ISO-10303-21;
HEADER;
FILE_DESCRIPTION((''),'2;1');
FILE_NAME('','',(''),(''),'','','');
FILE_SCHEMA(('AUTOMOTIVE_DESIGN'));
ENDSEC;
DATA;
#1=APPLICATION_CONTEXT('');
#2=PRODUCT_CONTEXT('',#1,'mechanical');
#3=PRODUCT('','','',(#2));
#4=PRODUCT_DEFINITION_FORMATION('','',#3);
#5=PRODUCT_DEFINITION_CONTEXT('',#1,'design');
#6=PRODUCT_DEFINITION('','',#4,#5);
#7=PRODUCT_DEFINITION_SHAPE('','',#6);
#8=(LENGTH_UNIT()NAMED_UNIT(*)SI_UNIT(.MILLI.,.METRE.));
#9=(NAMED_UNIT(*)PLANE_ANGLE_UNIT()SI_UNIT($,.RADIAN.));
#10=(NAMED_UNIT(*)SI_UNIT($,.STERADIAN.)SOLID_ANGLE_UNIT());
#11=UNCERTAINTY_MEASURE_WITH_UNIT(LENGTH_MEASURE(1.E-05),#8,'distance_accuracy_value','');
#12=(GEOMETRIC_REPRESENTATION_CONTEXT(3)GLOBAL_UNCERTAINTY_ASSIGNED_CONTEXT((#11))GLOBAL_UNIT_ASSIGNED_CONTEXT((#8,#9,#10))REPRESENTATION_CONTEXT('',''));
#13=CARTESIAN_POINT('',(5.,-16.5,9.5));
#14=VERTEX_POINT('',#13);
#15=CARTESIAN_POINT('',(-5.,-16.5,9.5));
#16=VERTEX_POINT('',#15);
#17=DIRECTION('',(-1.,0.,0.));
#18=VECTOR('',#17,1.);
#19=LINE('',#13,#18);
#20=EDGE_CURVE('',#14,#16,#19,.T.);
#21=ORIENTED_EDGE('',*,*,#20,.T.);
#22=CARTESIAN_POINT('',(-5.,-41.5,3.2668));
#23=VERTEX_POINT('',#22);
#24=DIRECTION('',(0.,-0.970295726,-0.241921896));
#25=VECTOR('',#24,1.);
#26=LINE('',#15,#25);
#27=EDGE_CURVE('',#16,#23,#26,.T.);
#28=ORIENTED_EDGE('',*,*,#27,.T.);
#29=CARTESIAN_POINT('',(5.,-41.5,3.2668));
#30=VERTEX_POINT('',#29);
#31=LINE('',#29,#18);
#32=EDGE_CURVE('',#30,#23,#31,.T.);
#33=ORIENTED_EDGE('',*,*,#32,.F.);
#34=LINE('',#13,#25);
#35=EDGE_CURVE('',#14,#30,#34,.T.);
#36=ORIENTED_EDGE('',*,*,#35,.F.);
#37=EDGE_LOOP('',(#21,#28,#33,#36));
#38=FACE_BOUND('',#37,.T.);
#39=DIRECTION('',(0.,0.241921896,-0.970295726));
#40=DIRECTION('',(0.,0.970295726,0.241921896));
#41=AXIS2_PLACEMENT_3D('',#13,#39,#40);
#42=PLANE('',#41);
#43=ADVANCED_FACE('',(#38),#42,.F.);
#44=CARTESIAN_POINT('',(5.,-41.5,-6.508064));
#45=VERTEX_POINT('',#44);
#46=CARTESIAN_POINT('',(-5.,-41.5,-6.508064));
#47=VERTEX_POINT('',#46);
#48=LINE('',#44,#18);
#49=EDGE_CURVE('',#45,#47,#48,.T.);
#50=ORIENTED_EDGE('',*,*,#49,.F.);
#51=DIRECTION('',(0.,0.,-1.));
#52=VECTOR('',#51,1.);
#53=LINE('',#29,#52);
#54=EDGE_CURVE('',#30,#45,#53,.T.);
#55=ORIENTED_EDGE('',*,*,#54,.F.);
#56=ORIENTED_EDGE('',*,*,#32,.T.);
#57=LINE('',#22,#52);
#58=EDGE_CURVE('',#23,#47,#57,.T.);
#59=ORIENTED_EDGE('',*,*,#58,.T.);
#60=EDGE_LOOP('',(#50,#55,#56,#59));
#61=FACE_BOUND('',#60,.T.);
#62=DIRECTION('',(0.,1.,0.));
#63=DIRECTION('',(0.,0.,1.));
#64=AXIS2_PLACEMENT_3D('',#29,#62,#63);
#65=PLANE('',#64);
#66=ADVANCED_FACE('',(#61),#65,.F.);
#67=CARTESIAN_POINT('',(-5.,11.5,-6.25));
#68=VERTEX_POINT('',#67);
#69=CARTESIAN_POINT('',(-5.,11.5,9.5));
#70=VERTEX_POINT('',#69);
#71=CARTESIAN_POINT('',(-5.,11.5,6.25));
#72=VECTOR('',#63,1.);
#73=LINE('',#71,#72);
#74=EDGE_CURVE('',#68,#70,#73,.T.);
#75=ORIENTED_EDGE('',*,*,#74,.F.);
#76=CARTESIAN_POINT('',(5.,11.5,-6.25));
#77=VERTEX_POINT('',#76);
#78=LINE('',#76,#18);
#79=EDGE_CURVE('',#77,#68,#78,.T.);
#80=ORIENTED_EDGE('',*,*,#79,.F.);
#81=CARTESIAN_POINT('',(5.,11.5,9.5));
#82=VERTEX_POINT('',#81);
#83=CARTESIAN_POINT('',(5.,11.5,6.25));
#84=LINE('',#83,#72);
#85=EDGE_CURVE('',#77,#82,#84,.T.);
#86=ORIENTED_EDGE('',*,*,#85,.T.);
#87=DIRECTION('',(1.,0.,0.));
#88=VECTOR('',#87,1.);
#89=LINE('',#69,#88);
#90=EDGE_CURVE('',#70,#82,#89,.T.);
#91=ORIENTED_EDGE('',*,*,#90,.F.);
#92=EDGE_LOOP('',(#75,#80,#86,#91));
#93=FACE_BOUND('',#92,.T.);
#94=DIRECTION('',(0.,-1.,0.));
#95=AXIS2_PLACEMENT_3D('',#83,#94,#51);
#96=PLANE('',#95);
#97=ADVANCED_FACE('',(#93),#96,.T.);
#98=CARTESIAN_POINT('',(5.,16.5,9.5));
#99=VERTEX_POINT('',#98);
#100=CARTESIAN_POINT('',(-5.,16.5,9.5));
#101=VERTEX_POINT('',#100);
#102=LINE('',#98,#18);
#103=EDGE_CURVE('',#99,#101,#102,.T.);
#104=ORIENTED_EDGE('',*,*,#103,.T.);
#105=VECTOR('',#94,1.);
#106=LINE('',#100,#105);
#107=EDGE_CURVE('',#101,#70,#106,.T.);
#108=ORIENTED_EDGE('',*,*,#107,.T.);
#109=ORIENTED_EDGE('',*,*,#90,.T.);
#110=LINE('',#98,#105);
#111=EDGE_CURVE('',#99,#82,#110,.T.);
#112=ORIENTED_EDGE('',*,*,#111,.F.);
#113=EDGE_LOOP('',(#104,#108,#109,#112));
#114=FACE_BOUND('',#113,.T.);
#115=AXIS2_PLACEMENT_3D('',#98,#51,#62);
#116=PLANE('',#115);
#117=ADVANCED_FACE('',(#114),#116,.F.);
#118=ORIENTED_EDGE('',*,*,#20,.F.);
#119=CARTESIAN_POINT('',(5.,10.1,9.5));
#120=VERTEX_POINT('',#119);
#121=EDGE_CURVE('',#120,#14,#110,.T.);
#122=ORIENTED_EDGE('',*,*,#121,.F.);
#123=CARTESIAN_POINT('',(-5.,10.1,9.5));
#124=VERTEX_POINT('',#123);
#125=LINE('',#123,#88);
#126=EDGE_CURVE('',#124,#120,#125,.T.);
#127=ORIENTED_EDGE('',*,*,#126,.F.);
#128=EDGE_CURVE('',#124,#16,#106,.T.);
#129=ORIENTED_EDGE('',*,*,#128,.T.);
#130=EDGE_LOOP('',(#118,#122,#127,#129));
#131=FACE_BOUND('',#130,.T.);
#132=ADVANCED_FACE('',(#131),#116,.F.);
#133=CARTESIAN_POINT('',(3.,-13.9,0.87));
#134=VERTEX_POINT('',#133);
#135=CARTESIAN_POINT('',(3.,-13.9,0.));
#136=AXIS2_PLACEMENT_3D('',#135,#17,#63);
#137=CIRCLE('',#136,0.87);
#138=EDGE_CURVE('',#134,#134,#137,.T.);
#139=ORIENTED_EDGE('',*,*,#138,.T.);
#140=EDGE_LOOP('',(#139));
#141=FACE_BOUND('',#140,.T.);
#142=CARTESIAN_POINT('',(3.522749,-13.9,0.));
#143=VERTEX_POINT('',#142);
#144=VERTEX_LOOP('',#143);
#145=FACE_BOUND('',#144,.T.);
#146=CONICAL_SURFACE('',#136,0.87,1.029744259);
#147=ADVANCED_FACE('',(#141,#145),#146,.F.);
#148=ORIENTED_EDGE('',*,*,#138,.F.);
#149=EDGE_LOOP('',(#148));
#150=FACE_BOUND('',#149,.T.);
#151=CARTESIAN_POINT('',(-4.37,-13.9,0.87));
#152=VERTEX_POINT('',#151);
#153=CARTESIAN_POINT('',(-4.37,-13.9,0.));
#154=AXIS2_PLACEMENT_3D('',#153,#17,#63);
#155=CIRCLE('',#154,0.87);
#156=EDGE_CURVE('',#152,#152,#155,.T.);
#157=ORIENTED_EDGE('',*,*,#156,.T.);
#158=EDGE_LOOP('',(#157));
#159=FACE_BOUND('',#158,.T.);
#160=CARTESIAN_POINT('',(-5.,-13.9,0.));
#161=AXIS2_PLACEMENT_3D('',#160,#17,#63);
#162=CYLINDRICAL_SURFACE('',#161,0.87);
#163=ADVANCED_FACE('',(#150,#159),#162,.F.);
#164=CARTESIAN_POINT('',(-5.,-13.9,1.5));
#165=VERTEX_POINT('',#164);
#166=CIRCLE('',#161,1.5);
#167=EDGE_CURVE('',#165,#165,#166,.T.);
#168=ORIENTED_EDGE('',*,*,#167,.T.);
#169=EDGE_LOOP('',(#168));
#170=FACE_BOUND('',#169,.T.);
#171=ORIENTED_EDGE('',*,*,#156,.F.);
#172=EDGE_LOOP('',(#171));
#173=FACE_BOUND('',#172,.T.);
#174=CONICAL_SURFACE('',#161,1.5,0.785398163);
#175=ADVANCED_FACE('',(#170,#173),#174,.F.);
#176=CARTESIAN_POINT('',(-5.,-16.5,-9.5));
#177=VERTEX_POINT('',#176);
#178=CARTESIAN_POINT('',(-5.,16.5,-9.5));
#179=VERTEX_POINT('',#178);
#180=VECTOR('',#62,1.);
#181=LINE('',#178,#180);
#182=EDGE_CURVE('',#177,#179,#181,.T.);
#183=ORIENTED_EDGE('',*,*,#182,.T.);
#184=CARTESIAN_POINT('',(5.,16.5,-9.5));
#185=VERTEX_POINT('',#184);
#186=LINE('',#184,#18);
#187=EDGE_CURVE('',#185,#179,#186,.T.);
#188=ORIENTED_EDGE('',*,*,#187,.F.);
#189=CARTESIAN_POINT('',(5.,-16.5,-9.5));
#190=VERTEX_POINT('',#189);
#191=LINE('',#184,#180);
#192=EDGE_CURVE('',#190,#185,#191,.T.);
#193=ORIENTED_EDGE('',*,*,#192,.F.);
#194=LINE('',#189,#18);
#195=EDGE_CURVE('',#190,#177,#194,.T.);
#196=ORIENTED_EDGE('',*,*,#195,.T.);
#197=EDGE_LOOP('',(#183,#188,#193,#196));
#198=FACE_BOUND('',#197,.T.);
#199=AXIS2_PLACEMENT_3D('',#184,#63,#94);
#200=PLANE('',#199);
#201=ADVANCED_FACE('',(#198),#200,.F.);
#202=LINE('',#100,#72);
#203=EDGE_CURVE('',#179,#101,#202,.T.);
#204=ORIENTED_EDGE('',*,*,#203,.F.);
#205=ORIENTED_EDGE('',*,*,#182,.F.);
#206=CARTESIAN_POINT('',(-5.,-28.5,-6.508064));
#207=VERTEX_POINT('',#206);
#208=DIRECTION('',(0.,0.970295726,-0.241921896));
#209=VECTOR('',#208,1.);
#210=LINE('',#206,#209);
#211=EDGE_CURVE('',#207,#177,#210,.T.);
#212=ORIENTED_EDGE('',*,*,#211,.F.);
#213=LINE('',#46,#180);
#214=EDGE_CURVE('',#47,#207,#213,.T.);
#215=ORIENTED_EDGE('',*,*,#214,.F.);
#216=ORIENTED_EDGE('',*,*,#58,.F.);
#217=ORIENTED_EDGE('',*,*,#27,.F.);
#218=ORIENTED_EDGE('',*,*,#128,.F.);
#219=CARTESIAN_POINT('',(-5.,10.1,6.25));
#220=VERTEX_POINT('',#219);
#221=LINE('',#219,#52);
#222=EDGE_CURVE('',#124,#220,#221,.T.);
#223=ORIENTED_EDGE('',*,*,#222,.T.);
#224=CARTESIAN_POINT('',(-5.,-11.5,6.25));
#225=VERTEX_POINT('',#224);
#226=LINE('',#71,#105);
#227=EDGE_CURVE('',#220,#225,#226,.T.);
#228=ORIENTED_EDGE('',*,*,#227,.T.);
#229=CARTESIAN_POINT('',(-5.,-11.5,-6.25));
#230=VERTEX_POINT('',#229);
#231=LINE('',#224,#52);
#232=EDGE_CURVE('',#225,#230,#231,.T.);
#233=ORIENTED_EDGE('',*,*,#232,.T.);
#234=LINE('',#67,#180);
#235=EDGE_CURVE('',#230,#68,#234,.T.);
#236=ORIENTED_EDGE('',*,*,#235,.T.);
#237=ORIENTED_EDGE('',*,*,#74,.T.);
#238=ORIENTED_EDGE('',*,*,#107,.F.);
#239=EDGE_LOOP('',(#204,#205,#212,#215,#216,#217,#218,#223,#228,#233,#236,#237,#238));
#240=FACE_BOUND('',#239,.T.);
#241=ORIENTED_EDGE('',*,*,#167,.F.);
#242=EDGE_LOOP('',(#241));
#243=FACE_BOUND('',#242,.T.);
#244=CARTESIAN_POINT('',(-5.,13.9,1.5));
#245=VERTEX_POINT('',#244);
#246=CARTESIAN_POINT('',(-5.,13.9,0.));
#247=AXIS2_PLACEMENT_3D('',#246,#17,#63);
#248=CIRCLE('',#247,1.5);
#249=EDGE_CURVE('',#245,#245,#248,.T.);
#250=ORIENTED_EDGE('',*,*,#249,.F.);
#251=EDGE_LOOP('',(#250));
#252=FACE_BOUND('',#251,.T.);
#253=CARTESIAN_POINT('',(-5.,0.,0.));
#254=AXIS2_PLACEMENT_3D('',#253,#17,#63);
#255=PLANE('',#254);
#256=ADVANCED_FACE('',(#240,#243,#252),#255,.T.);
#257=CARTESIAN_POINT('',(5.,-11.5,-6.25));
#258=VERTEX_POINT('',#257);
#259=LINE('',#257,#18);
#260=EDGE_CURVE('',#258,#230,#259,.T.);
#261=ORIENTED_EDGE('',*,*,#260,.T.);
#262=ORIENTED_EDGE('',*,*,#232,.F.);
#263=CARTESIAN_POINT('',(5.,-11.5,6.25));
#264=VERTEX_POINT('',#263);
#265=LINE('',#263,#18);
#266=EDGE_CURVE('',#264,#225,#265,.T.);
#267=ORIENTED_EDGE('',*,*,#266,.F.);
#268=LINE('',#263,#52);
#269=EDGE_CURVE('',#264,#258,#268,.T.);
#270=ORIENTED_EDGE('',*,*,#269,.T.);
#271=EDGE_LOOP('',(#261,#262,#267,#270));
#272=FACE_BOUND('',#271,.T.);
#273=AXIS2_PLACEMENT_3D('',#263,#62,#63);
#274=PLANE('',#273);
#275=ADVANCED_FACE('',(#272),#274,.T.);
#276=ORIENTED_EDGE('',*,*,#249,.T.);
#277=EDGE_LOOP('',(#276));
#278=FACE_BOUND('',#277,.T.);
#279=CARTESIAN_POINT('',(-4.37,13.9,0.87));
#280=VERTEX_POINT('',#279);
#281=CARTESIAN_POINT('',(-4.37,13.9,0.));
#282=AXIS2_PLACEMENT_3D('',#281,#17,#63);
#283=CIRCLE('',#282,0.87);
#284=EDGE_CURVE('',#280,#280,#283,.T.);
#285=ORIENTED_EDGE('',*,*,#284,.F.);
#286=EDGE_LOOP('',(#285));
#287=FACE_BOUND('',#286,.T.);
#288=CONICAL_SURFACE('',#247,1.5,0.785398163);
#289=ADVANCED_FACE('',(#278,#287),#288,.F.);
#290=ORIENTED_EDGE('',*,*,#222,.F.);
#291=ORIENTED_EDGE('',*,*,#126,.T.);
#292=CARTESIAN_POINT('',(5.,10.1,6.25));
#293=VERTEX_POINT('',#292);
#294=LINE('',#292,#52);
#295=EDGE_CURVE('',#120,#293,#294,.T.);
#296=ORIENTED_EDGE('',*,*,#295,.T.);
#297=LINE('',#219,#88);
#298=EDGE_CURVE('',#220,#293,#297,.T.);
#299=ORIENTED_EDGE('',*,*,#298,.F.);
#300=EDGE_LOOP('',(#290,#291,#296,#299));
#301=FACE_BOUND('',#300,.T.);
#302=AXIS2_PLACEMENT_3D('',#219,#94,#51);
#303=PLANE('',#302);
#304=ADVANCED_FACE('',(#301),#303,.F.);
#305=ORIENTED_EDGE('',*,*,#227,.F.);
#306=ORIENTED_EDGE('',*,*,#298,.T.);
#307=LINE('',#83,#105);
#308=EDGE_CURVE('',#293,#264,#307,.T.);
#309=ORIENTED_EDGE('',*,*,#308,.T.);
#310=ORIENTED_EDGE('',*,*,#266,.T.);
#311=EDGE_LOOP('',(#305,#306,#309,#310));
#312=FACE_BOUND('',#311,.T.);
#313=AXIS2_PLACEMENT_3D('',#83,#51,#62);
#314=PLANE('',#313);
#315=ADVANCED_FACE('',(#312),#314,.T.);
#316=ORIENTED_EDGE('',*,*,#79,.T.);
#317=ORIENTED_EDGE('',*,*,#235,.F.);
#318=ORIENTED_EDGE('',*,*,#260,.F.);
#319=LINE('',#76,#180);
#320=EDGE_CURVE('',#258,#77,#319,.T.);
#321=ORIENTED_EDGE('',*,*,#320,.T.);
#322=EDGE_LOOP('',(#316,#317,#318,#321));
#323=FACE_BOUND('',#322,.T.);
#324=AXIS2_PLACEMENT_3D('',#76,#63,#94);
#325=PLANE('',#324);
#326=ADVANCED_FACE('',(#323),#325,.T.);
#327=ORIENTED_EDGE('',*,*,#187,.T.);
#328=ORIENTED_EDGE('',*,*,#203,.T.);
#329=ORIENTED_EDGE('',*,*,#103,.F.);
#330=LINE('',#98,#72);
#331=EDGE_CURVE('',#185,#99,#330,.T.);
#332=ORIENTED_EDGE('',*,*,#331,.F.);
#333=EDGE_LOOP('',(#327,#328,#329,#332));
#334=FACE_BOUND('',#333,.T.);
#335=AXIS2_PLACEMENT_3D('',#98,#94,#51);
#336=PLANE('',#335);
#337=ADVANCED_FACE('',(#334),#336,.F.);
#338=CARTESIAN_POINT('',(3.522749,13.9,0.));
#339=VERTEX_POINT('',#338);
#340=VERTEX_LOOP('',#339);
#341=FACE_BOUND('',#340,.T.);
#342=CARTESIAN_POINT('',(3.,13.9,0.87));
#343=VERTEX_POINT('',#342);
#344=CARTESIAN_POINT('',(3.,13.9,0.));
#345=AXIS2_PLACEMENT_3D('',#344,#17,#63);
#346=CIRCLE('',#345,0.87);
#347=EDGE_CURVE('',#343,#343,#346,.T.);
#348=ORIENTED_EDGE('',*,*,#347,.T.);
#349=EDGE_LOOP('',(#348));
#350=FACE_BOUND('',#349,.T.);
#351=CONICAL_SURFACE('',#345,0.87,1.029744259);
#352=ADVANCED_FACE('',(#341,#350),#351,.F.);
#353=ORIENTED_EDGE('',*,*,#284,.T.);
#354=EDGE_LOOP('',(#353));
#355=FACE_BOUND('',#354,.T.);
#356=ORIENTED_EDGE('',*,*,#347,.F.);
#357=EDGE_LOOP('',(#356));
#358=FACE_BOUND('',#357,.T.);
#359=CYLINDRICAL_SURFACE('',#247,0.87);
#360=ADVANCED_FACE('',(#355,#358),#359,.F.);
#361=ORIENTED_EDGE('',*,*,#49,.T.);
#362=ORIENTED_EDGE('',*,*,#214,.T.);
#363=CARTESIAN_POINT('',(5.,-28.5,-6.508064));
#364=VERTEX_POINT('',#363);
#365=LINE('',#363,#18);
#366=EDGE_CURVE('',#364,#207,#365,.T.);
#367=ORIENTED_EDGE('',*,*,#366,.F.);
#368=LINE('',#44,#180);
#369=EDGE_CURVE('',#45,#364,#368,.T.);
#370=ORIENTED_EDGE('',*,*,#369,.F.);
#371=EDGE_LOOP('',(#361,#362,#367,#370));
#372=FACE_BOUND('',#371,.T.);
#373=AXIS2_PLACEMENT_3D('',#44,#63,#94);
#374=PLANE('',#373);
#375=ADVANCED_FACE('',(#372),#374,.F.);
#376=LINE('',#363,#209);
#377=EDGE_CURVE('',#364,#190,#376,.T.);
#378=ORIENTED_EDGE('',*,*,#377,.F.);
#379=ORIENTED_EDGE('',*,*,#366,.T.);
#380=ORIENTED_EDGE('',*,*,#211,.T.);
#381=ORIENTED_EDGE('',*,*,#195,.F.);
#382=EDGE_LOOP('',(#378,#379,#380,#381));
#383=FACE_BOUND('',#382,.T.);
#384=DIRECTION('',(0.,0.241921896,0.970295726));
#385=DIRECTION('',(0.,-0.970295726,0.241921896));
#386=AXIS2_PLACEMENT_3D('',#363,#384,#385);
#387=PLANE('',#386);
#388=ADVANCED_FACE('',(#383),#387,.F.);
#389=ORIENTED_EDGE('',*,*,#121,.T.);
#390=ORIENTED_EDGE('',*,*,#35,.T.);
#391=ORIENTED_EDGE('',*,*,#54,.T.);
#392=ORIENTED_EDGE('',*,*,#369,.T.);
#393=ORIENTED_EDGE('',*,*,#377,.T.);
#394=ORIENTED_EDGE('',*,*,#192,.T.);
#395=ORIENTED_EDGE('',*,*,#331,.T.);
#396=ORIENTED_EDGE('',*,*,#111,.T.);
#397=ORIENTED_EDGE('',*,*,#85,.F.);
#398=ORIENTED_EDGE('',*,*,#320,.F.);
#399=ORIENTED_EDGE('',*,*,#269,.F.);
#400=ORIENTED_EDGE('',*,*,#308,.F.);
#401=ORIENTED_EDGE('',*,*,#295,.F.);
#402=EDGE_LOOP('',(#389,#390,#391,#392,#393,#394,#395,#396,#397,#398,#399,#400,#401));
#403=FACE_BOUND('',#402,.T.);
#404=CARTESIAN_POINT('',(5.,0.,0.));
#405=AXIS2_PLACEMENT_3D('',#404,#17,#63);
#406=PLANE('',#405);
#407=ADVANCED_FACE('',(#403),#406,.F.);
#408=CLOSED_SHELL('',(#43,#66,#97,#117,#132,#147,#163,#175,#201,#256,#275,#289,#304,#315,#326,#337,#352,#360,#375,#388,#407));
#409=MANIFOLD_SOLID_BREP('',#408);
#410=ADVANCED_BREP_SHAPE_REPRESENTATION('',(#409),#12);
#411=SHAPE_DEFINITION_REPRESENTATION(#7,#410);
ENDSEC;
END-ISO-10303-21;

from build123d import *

# Parameters (mm, degrees)
SKETCH1_W           = 12.5
SKETCH1_H           = 23
BOSS_EXTRUDE1_DEPTH = 5
SKETCH4_W           = 3.25
SKETCH4_H           = 1.4
CUT_EXTRUDE1_DEPTH  = 44.732139211


# Read off the part's stored shape, not the designer's step: CSK for M2 Flat Head Machine Screw1
with BuildPart() as part:
    # Sketch1 → Boss-Extrude1 (new, symmetric)
    with BuildSketch(Plane(origin=(0, 0, 0), x_dir=(0, 0, -1), z_dir=(1, 0, 0))):
        Polygon((-9.5, -16.5), (-3.266799929, -41.5), (6.508063966, -41.5), (6.508063966, -28.5), (9.5, -16.5), (9.5, 16.5), (-9.5, 16.5), align=None)
        Rectangle(SKETCH1_W, SKETCH1_H, mode=Mode.SUBTRACT)
    extrude(amount=BOSS_EXTRUDE1_DEPTH, both=True)

    # CSK for M2 Flat Head Machine Screw1 outl → CSK for M2 Flat Head Machine Screw1 (revolve, cut)
    with BuildSketch(Plane(origin=(0, 13.9, 0), x_dir=(0, 1, 0), z_dir=(0, 0, -1))):
        Polygon((0.87, 3), (0, 3.522748739), (0, -5), (1.5, -5), (0.87, -4.37), align=None)
    revolve(axis=Axis((0, 13.9, 0), (1, 0, 0)), mode=Mode.SUBTRACT)

    # CSK for M2 Flat Head Machine Screw1 2 ou → CSK for M2 Flat Head Machine Screw1 2 (revolve, cut)
    with BuildSketch(Plane(origin=(0, -13.9, 0), x_dir=(0, 1, 0), z_dir=(0, 0, -1))):
        Polygon((0.87, 3), (0, 3.522748739), (0, -5), (1.5, -5), (0.87, -4.37), align=None)
    revolve(axis=Axis((0, -13.9, 0), (1, 0, 0)), mode=Mode.SUBTRACT)

    # Sketch4 → Cut-Extrude1 (cut, through all)
    with BuildSketch(Plane(origin=(5, 0, 0), x_dir=(0, 0, -1), z_dir=(1, 0, 0))):
        with Locations((-7.875, 10.8)):
            Rectangle(SKETCH4_W, SKETCH4_H)
    extrude(amount=-CUT_EXTRUDE1_DEPTH, mode=Mode.SUBTRACT)


solid = part.part
